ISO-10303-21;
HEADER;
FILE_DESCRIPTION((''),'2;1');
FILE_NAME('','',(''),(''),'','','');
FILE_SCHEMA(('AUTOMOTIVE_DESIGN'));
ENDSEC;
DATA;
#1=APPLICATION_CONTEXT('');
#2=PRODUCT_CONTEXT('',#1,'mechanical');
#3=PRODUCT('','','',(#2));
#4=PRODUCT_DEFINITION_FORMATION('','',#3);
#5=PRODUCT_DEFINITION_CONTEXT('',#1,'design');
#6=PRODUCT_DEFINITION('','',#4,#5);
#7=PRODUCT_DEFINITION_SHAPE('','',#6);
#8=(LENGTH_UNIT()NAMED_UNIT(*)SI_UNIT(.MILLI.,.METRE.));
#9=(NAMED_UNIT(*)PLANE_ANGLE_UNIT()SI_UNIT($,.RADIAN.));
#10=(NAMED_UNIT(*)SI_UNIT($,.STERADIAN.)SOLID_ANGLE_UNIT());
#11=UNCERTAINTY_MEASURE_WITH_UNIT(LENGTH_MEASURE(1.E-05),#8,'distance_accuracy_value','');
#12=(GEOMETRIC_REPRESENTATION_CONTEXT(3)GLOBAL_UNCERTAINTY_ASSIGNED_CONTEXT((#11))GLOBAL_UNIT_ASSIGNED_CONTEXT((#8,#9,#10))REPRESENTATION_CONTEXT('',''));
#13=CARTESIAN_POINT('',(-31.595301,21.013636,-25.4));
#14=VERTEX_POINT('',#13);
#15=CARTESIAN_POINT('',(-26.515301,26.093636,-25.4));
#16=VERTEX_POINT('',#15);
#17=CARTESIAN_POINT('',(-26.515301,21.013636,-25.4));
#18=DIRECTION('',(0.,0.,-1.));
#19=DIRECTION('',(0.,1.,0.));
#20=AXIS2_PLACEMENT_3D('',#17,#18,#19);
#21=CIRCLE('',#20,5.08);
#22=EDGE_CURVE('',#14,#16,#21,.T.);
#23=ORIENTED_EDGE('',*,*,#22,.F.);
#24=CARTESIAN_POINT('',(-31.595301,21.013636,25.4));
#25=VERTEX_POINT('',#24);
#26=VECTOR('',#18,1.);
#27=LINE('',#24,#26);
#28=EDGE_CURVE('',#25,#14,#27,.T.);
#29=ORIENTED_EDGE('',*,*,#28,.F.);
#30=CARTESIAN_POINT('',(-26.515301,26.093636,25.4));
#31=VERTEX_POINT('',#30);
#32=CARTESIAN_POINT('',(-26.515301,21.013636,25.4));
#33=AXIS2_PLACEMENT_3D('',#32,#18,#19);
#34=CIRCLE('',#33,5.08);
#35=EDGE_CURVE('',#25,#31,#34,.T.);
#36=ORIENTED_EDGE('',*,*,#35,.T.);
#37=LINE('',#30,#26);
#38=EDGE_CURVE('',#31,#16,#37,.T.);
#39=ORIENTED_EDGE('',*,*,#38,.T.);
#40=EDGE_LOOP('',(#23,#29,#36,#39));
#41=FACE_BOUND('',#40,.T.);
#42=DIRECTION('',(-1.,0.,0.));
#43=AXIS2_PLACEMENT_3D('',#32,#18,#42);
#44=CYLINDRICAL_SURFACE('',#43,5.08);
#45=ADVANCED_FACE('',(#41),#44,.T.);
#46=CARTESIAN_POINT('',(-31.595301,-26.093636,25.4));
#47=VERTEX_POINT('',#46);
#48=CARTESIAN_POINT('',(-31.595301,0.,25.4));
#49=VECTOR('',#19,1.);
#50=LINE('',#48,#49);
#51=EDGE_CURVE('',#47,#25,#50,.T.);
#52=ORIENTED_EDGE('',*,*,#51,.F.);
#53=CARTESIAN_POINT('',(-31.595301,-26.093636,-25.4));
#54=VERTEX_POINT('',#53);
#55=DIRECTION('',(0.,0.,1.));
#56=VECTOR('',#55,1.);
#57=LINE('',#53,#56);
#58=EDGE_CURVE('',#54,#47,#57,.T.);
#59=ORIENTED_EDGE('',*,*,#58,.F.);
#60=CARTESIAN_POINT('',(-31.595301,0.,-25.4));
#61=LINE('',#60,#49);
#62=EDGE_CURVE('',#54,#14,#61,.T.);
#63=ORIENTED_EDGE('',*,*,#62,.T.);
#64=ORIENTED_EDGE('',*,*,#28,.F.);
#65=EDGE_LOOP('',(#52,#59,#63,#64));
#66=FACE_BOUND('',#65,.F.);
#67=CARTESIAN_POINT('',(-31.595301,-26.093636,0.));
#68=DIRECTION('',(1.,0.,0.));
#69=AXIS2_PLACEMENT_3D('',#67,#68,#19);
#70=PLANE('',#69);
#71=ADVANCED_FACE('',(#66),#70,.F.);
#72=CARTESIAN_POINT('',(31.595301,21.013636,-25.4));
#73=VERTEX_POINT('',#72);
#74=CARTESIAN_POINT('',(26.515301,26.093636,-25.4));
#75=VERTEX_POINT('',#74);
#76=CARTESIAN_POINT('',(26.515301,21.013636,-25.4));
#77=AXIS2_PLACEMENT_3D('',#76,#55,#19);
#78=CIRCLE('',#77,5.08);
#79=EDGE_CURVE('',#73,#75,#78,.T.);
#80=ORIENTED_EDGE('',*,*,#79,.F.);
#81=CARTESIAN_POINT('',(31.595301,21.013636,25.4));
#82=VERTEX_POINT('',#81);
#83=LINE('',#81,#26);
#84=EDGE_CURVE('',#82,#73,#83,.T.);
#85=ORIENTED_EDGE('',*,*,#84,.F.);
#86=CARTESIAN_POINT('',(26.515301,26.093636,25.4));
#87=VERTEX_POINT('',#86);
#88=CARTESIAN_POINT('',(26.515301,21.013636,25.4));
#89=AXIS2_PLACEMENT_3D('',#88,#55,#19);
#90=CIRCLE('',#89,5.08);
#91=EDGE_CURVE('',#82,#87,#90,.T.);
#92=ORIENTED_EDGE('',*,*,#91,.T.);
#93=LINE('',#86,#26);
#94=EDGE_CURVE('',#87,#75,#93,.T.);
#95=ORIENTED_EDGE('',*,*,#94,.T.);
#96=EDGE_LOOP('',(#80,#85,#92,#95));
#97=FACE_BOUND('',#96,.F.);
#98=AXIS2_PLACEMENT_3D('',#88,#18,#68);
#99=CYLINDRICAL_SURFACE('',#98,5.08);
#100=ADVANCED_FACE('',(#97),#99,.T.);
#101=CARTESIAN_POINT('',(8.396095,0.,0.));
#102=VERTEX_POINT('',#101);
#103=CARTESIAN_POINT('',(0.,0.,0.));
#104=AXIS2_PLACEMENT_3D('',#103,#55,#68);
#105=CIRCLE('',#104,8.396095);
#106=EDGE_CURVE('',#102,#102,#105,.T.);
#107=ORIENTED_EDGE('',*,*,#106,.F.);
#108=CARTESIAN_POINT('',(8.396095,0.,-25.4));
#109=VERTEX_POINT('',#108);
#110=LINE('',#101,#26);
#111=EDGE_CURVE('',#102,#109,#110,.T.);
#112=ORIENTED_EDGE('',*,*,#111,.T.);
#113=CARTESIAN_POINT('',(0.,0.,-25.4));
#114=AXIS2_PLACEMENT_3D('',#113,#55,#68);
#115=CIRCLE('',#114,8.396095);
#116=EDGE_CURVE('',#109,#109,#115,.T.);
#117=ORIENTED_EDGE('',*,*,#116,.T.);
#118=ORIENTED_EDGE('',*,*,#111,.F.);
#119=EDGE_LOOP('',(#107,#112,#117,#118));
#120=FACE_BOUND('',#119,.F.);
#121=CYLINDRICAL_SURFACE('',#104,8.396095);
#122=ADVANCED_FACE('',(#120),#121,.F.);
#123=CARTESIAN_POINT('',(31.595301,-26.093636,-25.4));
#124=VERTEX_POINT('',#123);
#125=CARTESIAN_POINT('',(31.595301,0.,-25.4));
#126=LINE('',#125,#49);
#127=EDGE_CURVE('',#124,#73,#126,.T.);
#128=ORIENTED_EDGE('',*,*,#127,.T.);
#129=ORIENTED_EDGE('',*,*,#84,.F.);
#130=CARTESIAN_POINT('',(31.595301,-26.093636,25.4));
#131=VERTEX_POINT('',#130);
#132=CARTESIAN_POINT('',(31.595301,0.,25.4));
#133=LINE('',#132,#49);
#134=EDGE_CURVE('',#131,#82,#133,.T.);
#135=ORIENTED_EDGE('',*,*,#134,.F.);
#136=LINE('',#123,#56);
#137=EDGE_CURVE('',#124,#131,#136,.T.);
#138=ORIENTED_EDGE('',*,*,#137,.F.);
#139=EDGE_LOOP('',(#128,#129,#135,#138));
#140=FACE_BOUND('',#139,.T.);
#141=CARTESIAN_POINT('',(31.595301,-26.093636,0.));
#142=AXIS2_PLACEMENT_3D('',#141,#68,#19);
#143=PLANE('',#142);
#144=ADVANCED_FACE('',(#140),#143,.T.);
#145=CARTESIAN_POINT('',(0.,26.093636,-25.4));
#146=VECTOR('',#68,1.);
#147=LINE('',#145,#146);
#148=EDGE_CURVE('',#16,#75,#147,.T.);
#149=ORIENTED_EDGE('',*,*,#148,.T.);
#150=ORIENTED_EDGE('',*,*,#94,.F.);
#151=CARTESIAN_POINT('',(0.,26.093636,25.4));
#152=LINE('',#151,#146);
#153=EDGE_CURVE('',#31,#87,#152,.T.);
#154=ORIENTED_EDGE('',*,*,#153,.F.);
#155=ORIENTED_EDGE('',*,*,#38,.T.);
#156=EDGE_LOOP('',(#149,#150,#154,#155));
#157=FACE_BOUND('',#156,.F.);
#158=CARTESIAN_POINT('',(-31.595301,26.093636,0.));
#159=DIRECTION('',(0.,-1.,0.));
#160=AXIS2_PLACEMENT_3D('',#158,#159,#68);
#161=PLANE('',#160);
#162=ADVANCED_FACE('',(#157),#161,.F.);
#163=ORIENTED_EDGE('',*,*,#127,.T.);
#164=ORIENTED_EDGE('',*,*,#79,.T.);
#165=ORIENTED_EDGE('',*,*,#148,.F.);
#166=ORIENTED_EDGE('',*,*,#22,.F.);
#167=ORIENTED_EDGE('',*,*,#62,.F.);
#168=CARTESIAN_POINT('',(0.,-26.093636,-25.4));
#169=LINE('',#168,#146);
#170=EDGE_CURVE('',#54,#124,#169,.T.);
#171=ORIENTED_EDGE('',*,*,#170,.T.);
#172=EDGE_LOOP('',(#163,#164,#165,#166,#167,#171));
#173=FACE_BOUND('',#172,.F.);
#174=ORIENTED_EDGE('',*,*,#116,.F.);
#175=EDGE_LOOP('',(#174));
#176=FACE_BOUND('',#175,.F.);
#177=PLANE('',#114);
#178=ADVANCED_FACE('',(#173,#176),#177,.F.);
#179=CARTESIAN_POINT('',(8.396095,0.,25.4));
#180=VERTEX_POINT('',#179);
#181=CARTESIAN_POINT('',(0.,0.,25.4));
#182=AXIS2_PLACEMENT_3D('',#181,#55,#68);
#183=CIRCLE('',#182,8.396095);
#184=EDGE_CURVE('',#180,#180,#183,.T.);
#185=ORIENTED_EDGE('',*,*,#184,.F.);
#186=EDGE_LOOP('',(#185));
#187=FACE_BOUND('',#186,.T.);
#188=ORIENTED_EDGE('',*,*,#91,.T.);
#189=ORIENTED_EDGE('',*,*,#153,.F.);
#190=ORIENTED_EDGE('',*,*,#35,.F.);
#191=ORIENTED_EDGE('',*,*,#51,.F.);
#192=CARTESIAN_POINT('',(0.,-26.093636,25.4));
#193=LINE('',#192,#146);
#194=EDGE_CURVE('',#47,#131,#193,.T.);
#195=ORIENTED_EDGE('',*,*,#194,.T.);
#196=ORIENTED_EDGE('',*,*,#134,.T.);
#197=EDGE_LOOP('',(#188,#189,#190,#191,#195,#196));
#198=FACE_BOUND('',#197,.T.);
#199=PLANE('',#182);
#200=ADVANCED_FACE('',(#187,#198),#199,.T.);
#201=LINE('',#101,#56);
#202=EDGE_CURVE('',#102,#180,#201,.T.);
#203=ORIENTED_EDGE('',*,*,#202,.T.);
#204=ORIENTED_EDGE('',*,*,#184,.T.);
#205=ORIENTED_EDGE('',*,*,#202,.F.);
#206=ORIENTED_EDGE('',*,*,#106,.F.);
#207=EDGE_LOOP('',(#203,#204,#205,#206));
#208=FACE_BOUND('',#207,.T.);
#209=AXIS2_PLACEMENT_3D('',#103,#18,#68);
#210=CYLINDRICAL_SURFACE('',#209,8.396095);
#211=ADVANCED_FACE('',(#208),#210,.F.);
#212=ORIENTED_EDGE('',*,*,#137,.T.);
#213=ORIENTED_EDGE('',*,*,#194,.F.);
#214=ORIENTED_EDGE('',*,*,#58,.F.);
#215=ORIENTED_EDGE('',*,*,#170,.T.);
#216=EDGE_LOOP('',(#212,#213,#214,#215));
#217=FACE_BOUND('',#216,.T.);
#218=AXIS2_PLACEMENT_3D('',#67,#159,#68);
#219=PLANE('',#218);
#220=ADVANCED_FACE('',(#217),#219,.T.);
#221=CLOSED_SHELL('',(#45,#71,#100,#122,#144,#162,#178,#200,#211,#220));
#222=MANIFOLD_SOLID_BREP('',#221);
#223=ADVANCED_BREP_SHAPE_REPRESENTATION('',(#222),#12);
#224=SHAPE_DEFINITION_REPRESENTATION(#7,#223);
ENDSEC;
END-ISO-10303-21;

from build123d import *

# Parameters (mm, degrees)
F0_W          = 63.1906017661
F0_H          = 52.1872714162
F0_R          = 8.3960945755
F1_DEPTH      = 25.4
F1_DEPTH_BACK = 25.4
F2_R          = 5.08


# Not quite as in the source:
# - the program builds the solid bodies; features that only make, move or delete a surface that nothing else refers to are left out


with BuildPart() as f1:
    # F0 (on Top) → F1 (new body, two sides)
    with BuildSketch(Plane.XY) as f1_sk:
        Rectangle(F0_W, F0_H)
        Circle(F0_R, mode=Mode.SUBTRACT)
    extrude(amount=F1_DEPTH)
    extrude(f1_sk.sketch, amount=-F1_DEPTH_BACK)

    # F2
    f2_edges = [f1.edges().sort_by_distance(p)[0] for p in [
        (-31.595301, 26.093636, 0),
        (31.595301, 26.093636, 0),
    ]]
    fillet(f2_edges, radius=F2_R)


solid = f1.part
